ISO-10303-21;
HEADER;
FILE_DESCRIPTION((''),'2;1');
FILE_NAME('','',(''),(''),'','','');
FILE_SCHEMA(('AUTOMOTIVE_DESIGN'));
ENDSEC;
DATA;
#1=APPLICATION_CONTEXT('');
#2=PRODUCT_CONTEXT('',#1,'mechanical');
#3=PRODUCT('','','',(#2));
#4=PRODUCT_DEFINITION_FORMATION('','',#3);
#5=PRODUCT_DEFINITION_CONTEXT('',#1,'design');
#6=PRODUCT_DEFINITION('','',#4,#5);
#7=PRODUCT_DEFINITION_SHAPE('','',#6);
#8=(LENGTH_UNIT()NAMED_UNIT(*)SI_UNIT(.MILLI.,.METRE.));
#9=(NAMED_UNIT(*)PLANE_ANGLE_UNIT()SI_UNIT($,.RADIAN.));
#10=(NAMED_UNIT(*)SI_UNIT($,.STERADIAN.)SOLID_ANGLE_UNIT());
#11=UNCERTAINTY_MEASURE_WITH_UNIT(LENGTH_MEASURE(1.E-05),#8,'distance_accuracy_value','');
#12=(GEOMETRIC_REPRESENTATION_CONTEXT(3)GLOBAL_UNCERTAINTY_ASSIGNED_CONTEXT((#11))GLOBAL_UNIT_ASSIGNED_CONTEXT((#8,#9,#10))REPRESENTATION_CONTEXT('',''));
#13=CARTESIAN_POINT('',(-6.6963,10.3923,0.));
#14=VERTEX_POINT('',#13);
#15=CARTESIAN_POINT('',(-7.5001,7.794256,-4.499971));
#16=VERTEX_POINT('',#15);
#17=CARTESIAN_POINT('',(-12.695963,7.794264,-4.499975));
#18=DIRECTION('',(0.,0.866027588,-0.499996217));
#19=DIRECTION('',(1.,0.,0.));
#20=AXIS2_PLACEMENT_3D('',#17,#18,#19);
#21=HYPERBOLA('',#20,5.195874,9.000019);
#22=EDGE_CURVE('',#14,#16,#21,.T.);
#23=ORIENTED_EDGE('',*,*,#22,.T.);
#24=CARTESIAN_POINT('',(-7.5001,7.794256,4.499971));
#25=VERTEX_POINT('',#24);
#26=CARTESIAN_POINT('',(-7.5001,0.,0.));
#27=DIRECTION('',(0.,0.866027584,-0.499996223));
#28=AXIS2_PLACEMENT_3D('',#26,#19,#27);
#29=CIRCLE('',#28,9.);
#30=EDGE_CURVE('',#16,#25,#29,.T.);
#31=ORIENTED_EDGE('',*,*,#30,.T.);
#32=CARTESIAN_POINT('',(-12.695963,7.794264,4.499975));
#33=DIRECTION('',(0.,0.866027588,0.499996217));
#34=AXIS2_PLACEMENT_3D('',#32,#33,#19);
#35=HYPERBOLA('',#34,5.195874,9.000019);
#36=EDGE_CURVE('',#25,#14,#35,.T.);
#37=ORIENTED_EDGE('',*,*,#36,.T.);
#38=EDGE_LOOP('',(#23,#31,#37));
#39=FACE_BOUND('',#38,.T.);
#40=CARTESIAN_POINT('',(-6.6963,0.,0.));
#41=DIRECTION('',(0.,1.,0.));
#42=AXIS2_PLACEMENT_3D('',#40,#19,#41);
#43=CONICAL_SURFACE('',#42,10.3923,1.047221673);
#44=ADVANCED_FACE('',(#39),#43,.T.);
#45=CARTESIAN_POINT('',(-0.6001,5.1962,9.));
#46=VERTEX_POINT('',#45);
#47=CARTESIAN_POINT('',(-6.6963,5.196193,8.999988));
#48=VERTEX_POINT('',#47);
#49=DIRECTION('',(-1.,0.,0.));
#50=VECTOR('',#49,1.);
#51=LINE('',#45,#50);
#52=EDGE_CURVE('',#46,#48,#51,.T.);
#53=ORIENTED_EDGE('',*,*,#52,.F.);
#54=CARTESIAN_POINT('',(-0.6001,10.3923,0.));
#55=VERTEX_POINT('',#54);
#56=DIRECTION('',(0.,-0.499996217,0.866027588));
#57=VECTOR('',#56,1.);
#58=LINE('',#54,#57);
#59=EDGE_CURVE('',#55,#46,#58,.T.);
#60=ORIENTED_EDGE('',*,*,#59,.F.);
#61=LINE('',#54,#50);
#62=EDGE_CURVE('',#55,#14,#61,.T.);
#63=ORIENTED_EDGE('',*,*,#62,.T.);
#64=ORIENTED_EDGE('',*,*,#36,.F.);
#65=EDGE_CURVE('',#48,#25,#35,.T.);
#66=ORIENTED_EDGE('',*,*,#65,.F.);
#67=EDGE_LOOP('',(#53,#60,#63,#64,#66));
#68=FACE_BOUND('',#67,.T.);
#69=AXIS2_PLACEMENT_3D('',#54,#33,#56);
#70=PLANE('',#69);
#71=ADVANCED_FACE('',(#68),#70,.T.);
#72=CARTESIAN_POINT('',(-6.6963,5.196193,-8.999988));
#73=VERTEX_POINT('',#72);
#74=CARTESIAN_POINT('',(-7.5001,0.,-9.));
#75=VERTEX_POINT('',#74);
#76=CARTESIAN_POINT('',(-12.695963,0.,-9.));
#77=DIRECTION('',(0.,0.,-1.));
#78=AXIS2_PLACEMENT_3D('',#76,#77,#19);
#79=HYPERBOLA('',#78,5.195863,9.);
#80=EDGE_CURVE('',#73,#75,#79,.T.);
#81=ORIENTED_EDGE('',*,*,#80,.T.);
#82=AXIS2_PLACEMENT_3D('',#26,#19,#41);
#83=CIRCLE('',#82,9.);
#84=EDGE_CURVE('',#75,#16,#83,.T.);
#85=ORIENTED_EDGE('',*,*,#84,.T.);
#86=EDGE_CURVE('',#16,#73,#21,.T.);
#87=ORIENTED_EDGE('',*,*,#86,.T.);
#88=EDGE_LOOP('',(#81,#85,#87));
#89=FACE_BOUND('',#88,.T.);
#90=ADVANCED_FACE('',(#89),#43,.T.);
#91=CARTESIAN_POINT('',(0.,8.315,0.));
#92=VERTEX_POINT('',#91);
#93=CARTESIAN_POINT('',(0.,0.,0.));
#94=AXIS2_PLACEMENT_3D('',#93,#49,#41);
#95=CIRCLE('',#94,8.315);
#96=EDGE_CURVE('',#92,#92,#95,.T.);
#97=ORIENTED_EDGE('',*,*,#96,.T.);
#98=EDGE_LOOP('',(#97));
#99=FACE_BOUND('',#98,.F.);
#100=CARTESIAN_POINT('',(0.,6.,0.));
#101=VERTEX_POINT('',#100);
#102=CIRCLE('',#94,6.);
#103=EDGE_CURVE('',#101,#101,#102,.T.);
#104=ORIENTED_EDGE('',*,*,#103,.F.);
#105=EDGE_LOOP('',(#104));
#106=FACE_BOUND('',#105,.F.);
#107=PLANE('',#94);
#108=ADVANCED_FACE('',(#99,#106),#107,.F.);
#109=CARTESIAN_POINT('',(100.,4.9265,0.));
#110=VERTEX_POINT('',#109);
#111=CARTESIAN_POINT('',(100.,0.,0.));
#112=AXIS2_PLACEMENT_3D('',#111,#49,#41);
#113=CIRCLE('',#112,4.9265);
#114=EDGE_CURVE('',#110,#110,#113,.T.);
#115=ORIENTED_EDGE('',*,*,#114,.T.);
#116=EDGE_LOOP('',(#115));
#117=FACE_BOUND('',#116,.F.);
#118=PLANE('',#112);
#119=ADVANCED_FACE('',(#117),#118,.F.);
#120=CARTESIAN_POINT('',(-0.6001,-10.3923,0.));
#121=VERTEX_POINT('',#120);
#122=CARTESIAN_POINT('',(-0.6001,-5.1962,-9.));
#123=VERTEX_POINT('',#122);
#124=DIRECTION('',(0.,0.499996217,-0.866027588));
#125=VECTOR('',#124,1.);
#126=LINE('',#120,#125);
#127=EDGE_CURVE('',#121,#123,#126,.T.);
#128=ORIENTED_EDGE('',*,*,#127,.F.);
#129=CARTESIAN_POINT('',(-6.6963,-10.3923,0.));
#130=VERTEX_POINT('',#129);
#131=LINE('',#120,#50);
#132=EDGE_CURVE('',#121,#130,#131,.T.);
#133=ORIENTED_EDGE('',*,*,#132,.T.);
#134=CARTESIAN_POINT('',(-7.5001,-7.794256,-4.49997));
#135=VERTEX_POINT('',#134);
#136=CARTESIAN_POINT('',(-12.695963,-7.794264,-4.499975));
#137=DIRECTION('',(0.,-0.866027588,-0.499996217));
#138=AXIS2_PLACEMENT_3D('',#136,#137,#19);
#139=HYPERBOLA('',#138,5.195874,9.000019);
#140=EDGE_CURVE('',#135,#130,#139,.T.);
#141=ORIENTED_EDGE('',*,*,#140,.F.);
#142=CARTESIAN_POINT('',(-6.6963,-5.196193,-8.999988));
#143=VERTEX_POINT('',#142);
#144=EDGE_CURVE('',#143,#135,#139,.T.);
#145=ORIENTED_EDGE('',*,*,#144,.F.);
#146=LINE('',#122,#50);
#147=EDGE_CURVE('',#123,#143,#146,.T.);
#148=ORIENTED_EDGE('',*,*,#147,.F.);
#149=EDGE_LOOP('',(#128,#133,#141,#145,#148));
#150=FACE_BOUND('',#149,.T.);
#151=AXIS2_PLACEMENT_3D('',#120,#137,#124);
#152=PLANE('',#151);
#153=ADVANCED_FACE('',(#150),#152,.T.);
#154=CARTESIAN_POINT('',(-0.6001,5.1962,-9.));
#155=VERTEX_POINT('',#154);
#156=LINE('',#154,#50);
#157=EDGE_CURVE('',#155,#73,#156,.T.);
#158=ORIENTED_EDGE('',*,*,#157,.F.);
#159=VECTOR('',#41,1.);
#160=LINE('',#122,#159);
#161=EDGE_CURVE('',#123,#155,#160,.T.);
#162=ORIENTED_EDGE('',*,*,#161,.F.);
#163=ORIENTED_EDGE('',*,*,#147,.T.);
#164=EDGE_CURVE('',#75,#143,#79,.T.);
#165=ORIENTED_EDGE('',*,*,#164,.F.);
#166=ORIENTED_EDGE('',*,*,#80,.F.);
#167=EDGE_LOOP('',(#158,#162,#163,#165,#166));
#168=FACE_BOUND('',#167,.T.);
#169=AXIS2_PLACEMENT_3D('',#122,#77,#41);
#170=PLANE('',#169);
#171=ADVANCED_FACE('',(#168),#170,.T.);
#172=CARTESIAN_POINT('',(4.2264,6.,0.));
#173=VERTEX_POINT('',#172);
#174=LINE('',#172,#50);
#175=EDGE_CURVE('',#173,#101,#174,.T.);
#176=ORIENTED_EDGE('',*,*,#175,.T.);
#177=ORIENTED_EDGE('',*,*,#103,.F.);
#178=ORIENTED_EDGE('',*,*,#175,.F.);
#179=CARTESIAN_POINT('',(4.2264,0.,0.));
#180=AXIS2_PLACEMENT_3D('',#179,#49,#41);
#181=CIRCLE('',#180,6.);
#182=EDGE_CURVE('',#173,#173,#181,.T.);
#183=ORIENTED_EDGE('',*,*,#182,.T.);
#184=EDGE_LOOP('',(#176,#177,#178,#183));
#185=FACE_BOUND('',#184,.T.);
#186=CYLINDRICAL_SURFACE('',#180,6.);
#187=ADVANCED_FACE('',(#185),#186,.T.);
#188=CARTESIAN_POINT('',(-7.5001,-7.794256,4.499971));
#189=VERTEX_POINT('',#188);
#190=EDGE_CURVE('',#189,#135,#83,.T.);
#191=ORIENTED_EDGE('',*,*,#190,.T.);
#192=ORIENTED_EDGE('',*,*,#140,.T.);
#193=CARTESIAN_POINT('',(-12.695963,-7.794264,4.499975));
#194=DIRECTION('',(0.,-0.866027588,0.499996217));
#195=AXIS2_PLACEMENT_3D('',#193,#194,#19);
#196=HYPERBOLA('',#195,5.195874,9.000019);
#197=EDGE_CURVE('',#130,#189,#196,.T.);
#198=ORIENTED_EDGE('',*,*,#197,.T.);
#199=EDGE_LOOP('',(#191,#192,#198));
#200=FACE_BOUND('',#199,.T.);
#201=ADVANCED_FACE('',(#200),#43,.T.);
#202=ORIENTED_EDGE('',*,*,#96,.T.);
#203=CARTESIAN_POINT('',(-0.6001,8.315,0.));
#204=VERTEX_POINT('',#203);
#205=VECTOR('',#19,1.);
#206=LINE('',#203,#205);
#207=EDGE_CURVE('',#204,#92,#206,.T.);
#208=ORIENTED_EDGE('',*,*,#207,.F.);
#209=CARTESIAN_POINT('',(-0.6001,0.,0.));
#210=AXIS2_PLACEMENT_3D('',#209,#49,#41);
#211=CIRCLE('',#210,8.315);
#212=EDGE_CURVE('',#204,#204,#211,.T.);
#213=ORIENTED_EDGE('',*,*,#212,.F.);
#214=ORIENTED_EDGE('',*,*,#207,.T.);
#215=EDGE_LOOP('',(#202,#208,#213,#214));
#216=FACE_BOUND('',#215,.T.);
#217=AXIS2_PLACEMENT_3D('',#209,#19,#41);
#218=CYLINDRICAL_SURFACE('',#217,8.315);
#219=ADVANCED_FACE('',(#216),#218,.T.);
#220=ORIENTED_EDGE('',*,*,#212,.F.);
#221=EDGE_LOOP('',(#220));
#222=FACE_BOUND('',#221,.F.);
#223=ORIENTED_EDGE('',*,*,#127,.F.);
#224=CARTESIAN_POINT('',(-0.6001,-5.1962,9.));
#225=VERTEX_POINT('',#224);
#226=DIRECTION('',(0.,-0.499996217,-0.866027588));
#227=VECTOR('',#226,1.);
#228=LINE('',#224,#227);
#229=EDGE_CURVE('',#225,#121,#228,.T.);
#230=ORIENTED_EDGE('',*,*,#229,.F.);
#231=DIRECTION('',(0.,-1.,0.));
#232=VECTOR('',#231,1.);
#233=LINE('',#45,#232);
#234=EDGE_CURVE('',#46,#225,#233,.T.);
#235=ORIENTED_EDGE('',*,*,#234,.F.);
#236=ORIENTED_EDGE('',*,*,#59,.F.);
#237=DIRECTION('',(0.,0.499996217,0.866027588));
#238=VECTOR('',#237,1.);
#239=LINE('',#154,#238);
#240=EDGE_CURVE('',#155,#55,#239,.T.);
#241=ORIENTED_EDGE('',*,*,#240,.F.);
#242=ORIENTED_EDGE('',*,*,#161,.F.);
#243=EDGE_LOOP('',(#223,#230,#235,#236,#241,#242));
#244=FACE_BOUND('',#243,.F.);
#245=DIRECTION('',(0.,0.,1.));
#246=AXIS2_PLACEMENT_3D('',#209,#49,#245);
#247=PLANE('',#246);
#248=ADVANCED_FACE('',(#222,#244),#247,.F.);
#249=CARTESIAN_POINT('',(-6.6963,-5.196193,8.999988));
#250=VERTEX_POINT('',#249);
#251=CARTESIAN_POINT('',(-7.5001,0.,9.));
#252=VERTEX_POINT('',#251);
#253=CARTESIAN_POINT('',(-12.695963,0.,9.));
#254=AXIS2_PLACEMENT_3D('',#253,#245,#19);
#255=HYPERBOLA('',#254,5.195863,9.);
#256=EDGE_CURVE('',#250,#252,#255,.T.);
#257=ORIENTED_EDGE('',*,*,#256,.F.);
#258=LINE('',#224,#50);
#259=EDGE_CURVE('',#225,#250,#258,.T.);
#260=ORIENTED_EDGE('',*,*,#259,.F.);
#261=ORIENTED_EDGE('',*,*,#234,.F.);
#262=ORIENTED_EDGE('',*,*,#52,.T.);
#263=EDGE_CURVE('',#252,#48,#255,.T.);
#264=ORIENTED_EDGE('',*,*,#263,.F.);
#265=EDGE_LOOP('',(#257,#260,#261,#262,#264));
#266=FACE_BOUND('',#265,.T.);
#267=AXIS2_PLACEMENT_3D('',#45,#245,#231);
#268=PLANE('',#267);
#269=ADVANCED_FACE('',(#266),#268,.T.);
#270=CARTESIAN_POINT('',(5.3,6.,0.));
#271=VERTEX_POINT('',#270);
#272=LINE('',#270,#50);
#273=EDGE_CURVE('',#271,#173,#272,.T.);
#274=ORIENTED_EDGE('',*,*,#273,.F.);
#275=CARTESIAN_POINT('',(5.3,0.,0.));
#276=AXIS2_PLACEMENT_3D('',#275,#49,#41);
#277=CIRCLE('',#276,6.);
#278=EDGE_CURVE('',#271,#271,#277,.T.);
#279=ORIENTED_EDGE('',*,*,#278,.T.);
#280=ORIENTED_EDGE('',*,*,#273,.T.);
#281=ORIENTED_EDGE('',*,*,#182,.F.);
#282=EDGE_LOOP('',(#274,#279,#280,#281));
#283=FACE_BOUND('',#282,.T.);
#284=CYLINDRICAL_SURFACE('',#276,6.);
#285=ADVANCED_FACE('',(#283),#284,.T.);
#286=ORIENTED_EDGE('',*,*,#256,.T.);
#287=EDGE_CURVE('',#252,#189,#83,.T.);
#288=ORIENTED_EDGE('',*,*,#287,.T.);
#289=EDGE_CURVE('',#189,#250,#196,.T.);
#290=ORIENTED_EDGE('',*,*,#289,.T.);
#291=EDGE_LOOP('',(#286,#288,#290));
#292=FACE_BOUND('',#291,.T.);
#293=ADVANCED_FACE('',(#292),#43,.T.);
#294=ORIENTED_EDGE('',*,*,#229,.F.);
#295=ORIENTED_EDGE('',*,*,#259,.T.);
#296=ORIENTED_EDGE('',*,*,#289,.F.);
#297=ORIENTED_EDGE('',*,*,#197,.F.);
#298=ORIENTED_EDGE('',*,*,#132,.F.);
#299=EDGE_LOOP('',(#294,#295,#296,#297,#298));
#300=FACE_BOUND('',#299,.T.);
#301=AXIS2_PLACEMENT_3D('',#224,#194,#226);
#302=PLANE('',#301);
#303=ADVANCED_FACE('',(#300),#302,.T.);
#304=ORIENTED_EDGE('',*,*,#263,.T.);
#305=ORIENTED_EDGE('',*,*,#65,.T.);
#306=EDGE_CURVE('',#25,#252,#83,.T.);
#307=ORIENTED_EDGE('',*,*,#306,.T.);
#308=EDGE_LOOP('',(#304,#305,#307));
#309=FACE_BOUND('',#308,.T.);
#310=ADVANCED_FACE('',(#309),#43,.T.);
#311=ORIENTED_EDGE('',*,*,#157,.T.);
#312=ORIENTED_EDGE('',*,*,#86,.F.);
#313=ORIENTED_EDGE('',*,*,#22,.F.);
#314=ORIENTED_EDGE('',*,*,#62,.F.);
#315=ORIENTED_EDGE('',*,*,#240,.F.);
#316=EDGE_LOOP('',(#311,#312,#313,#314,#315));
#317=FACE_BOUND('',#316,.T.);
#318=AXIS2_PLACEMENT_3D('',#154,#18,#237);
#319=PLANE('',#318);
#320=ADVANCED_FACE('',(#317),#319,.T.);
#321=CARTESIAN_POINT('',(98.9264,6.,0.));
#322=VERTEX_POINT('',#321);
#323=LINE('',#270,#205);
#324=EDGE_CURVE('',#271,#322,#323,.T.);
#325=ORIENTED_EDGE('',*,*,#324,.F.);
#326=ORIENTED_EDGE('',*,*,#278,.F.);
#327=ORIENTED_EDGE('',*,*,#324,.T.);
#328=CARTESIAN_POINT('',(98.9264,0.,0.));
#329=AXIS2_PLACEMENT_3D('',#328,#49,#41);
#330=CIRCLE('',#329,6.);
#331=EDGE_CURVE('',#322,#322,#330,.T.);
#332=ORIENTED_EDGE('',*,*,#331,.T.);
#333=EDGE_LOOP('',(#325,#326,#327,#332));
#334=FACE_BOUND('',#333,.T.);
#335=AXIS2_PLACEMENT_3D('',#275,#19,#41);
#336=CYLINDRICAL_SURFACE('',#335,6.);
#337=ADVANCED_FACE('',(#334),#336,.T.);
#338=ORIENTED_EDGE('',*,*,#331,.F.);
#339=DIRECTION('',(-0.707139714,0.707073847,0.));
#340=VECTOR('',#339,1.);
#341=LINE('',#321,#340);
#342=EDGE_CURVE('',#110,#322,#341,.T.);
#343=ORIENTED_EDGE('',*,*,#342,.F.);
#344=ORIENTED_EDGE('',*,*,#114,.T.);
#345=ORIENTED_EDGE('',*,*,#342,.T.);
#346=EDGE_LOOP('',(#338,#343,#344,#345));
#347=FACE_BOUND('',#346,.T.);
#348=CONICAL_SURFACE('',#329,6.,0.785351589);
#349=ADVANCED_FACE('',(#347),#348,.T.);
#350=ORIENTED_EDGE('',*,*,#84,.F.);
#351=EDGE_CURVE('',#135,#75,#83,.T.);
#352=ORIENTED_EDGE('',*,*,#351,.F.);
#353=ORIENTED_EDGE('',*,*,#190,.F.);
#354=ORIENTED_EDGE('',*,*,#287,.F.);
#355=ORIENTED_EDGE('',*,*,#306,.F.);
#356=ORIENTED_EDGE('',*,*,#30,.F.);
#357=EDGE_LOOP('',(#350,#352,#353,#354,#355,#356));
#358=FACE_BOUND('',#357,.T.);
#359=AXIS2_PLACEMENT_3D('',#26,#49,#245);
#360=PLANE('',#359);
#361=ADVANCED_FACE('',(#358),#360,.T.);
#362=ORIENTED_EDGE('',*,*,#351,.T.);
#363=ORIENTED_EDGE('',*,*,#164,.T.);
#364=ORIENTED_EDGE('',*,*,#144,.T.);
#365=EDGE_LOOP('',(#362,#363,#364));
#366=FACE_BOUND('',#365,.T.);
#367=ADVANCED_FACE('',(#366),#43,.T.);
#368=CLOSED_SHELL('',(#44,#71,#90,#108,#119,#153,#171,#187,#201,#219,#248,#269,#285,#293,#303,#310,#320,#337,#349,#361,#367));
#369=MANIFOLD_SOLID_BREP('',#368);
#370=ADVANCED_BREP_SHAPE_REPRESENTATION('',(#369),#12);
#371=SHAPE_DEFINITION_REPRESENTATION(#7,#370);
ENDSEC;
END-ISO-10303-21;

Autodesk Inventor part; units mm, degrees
ref_plane "YZ Plane" through (0, 0, 0) normal (1, 0, 0) x (0, 1, 0)
ref_plane "XZ Plane" through (0, 0, 0) normal (0, 1, 0) x (-1, 0, 0)
sketch "Sketch1" plane through (0, 0, 0) normal (0, 0, 1) x (1, 0, 0)
  line L0 (0, 8.315) -> (0, 6)
  line L1 (5.3, 6) -> (100, 6)
  line L2 (100, 6) -> (100, 0)
  line L3 (100, 0) -> (-0.6001, 0)
  line L4 (-20.7201, 0) -> (120.12, 0) projected
  line L5 (-0.6001, 0) -> (-0.6001, 8.315)
  line L6 (-0.6001, 8.315) -> (0, 8.315)
  line L7 (5.3, 6) -> (4.2264, 6)
  line L8 (4.2264, 6) -> (0, 6)
  line L9 (0, -1.663) -> (0, 9.978) projected
  dimension "d0" = 100
  dimension "d1" = 94.7
  dimension "d2" = 12
  dimension "d9" = 0.6001
  dimension "d10" = 16.63
  dimension "d13" = 1.0736
  dimension "d14" = 12
revolve "Body" add sketch "Sketch1" angle 360 about axis through (100, 0, 0) along (-1, 0, 0)
sketch "Sketch2" plane through (-0.6001, 0, 0) normal (-1, 0, 0) x (0, 0, 1)
  line L0 (0, 10.3923) -> (9, 5.1962)
  line L1 (9, 5.1962) -> (9, -5.1962)
  line L2 (9, -5.1962) -> (0, -10.3923)
  line L3 (0, -10.3923) -> (-9, -5.1962)
  line L4 (-9, -5.1962) -> (-9, 5.1962)
  line L5 (-9, 5.1962) -> (0, 10.3923)
  point P0 (0, 0)
  point P1 (0, 0)
  dimension "d11" = 18
extrude "Head" add sketch "Sketch2" along normal blind 6.9
sketch "Sketch4" plane through (0, 0, 0) normal (0, 0, 1) x (1, 0, 0)
  line L0 (-7.5001, 9) -> (-7.5001, 10.3923)
  line L1 (-7.5001, 10.3923) -> (-6.6963, 10.3923)
  line L2 (-6.6963, 10.3923) -> (-7.5001, 9)
  line L3 (-8.8801, 0) -> (0.7799, 0) projected
  line L4 (-0.6001, 10.3923) -> (-7.5001, 10.3923) projected
  line L5 (-7.5001, 5.1962) -> (-7.5001, 10.3923) projected
  dimension "d5" = 30
  dimension "d19" = 18
revolve "Chamfer1" cut sketch "Sketch4" angle 360 about axis through (-10, 0, 0) along (1, 0, 0)
thread "Thread" size "M12x1.75" class "6g" standard "ISO Metric profile" length 94.7
chamfer "Chamfer2" distance 1.0735 distance2 1.0736 1 edges at (100, -6, 0) measured on face at (100, 1.8579, -1.646)
ref_plane "Work Plane1" through (1.525, 0, 0) normal (0, 0, 1) x (1, 0, 0)
equation "\"d11\" = SW"
equation "\"d3\" = KOH - SD"
equation "\"d15\" = GEL"
equation "\"d6\" = -0.5 * SPD + 0.5 * GD"
equation "\"d0\" = NLG"
equation "\"d1\" = GEL"
equation "\"d2\" = GD"
equation "\"d10\" = SD2"
equation "\"d14\" = BDM"
equation "\"d5\" = ANG1"
equation "\"d19\" = SW0"
equation "\"NLG\" = 100"
equation "\"GD\" = NND"
equation "\"BDM\" = NND"
equation "\"KOH\" = 7.5"
equation "\"GEL\" = 94.7"
equation "\"SW\" = 18"
equation "\"SW0\" = SW"
equation "\"SPD\" = NND - 1.2269 * PTC"
equation "\"SD2\" = 16.63"
equation "\"SD\" = 0.6"
equation "\"ANG1\" = 30deg"
equation "\"GAL\" = 0.61345 * PTC"
equation "\"GUL\" = 0.61345 * PTC"
equation "\"RR\" = 0.6"
equation "\"GD1\" = THREADDIA - 1.2269 * PTC"
equation "\"THREADDIA\" = 12"
equation "\"SDH\" = SD2"
equation "\"SDHG\" = 5.3"
equation "\"TOA\" = 30deg"
equation "\"PTC\" = 1.75"
equation "\"NND\" = 12"
equation "\"E0\" = 20.79"
properties part number "ISO 4017 - M12 x 100" material "Steel, Mild"
